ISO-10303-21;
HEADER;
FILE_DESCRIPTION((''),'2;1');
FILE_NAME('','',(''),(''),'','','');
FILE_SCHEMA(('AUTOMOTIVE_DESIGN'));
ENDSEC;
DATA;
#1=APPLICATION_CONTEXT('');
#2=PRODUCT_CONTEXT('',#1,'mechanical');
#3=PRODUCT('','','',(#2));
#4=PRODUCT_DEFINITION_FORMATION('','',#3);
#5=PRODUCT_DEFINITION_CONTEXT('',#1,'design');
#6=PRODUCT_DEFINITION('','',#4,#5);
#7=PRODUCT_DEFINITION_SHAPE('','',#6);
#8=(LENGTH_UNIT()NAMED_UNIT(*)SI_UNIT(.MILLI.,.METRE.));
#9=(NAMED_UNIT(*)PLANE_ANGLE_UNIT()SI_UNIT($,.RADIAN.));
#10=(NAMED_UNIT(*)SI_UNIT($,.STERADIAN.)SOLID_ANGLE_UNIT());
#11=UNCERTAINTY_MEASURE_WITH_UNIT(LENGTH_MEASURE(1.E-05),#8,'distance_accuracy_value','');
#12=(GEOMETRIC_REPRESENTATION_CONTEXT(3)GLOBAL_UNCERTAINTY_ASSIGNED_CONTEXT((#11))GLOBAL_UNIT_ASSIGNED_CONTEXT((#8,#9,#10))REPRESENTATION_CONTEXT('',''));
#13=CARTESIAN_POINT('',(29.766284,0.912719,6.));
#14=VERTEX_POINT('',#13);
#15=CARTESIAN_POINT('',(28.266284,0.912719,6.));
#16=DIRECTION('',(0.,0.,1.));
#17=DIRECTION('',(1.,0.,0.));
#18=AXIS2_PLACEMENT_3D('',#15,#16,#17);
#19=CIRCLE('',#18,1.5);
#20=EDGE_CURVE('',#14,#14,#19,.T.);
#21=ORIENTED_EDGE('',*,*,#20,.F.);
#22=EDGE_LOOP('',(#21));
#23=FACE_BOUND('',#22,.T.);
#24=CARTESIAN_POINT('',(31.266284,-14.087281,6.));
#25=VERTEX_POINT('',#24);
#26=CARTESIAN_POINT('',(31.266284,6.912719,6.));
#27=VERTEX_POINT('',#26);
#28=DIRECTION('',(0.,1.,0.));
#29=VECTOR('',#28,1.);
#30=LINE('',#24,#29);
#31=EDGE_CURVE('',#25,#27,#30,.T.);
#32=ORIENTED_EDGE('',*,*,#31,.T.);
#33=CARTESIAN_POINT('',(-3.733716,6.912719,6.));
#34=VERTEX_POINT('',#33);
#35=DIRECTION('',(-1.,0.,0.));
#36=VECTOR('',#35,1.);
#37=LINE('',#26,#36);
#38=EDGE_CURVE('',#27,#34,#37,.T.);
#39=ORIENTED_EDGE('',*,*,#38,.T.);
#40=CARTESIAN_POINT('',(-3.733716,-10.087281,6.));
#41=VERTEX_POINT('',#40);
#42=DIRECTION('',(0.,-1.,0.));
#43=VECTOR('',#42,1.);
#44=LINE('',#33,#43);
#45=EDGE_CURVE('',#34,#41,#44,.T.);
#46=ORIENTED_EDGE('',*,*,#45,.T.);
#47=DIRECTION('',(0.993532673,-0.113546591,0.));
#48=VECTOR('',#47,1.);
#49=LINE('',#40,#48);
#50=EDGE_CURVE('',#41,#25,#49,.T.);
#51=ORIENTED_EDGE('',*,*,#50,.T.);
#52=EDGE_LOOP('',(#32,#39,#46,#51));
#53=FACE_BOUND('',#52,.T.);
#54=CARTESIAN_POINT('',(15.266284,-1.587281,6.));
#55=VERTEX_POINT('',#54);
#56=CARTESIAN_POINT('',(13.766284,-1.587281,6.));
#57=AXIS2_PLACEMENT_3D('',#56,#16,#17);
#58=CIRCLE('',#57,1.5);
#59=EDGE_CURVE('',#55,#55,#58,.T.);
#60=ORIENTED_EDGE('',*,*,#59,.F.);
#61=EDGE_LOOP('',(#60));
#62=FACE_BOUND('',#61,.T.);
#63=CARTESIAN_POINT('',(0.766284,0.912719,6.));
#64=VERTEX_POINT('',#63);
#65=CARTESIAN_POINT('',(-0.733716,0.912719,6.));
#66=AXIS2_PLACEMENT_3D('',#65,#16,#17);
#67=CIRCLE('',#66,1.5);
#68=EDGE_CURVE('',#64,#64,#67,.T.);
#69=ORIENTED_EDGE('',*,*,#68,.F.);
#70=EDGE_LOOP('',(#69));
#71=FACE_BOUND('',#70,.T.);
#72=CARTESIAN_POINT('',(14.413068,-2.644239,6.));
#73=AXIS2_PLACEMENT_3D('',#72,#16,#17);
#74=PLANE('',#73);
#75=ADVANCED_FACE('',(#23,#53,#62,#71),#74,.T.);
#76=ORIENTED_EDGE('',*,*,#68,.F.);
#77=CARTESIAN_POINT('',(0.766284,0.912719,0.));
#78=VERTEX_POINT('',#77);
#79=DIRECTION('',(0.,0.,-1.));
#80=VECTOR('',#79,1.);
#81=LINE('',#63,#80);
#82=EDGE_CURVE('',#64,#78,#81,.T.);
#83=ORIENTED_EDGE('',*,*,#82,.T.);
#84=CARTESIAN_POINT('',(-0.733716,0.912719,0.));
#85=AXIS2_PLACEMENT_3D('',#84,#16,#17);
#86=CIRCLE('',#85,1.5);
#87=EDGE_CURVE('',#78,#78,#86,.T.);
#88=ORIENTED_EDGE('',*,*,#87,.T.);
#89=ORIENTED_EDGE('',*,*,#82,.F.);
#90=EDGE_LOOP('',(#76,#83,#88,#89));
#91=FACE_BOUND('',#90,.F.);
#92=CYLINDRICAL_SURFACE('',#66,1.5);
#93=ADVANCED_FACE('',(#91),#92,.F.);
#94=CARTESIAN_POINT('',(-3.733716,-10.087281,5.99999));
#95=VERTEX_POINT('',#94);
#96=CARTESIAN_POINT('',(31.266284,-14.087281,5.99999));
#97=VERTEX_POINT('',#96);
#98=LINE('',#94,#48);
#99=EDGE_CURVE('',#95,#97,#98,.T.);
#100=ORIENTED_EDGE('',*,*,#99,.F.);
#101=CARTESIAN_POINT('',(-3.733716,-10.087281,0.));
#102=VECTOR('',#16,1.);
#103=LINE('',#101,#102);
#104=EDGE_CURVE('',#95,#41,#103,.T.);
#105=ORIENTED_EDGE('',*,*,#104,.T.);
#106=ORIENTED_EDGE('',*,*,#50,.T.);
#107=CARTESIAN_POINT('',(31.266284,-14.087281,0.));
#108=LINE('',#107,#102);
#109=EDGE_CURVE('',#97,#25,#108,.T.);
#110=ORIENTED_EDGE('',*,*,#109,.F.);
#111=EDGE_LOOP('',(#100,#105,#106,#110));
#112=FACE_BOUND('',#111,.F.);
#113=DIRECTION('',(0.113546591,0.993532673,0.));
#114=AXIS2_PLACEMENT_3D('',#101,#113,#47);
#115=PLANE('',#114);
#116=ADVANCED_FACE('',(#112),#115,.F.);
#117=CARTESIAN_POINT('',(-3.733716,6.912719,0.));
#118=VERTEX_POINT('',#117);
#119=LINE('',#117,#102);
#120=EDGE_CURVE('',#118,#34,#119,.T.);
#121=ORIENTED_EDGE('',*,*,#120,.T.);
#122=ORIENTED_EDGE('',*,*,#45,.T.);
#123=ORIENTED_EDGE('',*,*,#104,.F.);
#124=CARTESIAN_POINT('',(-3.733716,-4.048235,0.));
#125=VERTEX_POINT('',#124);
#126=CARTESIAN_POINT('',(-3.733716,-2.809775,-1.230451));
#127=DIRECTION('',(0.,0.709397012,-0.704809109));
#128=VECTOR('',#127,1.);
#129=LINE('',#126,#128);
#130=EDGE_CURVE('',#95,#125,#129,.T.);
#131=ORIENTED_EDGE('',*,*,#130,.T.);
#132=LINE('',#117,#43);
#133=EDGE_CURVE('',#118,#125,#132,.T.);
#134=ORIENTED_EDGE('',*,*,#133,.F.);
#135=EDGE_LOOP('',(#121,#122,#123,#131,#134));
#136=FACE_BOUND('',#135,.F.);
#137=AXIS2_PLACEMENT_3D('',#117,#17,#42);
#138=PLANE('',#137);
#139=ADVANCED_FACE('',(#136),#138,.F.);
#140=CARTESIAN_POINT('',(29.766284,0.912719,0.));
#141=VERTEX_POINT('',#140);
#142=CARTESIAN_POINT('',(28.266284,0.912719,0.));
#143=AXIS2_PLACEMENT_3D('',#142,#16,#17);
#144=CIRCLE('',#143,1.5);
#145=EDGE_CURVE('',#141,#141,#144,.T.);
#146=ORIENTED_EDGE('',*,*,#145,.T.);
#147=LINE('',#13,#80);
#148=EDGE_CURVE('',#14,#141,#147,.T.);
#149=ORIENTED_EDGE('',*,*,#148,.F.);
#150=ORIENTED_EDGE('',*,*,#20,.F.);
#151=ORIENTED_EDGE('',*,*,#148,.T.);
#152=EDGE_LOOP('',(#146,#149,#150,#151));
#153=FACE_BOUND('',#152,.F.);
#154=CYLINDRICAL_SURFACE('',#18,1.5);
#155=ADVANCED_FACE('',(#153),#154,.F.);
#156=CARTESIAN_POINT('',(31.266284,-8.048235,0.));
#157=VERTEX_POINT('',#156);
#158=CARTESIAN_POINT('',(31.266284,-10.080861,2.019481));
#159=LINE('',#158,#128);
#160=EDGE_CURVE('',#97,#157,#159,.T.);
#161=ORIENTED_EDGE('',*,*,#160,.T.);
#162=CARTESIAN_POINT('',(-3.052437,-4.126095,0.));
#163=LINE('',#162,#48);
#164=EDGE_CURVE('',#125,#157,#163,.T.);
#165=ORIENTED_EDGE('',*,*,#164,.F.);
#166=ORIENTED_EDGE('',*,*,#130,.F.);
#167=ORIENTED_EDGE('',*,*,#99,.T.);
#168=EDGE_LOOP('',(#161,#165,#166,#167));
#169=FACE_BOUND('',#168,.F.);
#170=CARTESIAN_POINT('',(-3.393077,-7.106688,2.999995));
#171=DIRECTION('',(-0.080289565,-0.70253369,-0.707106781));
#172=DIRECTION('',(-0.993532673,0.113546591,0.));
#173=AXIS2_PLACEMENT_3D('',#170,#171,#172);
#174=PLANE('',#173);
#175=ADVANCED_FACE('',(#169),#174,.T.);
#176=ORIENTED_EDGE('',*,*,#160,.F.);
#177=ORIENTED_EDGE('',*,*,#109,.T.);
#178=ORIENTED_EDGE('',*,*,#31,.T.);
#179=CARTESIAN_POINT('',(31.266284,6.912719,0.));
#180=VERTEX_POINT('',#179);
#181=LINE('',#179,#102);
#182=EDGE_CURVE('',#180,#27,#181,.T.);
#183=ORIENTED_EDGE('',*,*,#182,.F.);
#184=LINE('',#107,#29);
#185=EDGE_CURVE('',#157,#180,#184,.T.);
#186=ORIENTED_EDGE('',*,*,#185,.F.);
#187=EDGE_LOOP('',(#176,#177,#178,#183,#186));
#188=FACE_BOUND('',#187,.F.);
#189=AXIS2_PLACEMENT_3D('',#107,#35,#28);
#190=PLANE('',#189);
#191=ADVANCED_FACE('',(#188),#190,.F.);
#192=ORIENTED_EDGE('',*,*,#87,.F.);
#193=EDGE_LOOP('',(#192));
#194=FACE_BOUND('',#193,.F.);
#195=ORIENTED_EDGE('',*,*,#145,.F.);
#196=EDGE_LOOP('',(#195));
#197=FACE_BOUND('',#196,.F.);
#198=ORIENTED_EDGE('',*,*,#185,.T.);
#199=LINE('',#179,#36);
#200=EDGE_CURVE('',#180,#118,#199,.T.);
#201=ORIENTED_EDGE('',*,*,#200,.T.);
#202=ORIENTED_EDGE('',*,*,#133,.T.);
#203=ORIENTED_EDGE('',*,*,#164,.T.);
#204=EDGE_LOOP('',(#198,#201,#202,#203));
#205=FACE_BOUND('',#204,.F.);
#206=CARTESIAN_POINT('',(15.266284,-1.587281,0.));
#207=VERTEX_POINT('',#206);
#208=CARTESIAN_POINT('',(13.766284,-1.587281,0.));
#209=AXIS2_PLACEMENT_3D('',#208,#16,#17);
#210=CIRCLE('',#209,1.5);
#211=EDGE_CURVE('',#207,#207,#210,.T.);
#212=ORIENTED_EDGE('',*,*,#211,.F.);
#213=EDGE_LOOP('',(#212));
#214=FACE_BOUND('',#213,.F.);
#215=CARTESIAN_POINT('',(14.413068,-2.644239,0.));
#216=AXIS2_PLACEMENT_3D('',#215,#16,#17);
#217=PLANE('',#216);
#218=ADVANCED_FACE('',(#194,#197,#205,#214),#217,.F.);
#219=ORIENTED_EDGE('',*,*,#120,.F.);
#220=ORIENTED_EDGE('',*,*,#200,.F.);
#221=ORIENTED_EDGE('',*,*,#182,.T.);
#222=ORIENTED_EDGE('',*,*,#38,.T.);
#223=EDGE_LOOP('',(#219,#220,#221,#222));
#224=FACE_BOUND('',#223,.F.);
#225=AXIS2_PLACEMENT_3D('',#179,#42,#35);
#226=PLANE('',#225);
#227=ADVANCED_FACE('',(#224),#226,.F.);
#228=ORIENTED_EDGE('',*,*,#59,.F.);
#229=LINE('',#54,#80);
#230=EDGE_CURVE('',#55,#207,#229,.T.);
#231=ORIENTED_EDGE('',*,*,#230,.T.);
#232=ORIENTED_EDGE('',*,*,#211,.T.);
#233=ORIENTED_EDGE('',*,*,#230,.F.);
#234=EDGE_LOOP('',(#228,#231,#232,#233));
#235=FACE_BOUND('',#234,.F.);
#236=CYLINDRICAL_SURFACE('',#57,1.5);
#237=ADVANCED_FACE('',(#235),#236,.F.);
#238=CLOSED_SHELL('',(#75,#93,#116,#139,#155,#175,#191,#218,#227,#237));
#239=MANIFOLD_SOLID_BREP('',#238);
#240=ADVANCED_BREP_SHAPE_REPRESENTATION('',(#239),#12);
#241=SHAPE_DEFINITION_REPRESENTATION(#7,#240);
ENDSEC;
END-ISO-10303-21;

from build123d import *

# Parameters (mm, degrees)
F1_DEPTH = 6
F2_SIZE  = 5.99999
F3_R     = 1.5
F4_DEPTH = 6


# Not quite as in the source:
# - a fillet or chamfer is up to 0.001 mm smaller than in the source, because OpenCascade refuses the exact size


with BuildPart() as f1:
    # F0 (on Top) → F1 (new body)
    with BuildSketch(Plane.XY):
        Polygon((31.2662842423, 6.9127185345), (-3.7337157577, 6.9127185345), (-3.7337157577, -10.0872814655), (31.2662842423, -14.0872814655), align=None)
    extrude(amount=F1_DEPTH)

    # F2 (size 6 in the source; OpenCascade refuses exactly that, so slightly less here)
    f2_edges = [f1.edges().sort_by_distance(p)[0] for p in [
        (13.766284, -12.087281, 0),
    ]]
    chamfer(f2_edges, length=F2_SIZE)

    # F3 (on face) → F4 (cut, through all)
    with BuildSketch(Plane.XY.offset(6)):
        with Locations((-0.7337157577, 0.9127185345)):
            Circle(F3_R)
        with Locations((13.7662842423, -1.5872814655)):
            Circle(F3_R)
        with Locations((28.2662842423, 0.9127185345)):
            Circle(F3_R)
    extrude(amount=-F4_DEPTH, mode=Mode.SUBTRACT)


solid = f1.part
